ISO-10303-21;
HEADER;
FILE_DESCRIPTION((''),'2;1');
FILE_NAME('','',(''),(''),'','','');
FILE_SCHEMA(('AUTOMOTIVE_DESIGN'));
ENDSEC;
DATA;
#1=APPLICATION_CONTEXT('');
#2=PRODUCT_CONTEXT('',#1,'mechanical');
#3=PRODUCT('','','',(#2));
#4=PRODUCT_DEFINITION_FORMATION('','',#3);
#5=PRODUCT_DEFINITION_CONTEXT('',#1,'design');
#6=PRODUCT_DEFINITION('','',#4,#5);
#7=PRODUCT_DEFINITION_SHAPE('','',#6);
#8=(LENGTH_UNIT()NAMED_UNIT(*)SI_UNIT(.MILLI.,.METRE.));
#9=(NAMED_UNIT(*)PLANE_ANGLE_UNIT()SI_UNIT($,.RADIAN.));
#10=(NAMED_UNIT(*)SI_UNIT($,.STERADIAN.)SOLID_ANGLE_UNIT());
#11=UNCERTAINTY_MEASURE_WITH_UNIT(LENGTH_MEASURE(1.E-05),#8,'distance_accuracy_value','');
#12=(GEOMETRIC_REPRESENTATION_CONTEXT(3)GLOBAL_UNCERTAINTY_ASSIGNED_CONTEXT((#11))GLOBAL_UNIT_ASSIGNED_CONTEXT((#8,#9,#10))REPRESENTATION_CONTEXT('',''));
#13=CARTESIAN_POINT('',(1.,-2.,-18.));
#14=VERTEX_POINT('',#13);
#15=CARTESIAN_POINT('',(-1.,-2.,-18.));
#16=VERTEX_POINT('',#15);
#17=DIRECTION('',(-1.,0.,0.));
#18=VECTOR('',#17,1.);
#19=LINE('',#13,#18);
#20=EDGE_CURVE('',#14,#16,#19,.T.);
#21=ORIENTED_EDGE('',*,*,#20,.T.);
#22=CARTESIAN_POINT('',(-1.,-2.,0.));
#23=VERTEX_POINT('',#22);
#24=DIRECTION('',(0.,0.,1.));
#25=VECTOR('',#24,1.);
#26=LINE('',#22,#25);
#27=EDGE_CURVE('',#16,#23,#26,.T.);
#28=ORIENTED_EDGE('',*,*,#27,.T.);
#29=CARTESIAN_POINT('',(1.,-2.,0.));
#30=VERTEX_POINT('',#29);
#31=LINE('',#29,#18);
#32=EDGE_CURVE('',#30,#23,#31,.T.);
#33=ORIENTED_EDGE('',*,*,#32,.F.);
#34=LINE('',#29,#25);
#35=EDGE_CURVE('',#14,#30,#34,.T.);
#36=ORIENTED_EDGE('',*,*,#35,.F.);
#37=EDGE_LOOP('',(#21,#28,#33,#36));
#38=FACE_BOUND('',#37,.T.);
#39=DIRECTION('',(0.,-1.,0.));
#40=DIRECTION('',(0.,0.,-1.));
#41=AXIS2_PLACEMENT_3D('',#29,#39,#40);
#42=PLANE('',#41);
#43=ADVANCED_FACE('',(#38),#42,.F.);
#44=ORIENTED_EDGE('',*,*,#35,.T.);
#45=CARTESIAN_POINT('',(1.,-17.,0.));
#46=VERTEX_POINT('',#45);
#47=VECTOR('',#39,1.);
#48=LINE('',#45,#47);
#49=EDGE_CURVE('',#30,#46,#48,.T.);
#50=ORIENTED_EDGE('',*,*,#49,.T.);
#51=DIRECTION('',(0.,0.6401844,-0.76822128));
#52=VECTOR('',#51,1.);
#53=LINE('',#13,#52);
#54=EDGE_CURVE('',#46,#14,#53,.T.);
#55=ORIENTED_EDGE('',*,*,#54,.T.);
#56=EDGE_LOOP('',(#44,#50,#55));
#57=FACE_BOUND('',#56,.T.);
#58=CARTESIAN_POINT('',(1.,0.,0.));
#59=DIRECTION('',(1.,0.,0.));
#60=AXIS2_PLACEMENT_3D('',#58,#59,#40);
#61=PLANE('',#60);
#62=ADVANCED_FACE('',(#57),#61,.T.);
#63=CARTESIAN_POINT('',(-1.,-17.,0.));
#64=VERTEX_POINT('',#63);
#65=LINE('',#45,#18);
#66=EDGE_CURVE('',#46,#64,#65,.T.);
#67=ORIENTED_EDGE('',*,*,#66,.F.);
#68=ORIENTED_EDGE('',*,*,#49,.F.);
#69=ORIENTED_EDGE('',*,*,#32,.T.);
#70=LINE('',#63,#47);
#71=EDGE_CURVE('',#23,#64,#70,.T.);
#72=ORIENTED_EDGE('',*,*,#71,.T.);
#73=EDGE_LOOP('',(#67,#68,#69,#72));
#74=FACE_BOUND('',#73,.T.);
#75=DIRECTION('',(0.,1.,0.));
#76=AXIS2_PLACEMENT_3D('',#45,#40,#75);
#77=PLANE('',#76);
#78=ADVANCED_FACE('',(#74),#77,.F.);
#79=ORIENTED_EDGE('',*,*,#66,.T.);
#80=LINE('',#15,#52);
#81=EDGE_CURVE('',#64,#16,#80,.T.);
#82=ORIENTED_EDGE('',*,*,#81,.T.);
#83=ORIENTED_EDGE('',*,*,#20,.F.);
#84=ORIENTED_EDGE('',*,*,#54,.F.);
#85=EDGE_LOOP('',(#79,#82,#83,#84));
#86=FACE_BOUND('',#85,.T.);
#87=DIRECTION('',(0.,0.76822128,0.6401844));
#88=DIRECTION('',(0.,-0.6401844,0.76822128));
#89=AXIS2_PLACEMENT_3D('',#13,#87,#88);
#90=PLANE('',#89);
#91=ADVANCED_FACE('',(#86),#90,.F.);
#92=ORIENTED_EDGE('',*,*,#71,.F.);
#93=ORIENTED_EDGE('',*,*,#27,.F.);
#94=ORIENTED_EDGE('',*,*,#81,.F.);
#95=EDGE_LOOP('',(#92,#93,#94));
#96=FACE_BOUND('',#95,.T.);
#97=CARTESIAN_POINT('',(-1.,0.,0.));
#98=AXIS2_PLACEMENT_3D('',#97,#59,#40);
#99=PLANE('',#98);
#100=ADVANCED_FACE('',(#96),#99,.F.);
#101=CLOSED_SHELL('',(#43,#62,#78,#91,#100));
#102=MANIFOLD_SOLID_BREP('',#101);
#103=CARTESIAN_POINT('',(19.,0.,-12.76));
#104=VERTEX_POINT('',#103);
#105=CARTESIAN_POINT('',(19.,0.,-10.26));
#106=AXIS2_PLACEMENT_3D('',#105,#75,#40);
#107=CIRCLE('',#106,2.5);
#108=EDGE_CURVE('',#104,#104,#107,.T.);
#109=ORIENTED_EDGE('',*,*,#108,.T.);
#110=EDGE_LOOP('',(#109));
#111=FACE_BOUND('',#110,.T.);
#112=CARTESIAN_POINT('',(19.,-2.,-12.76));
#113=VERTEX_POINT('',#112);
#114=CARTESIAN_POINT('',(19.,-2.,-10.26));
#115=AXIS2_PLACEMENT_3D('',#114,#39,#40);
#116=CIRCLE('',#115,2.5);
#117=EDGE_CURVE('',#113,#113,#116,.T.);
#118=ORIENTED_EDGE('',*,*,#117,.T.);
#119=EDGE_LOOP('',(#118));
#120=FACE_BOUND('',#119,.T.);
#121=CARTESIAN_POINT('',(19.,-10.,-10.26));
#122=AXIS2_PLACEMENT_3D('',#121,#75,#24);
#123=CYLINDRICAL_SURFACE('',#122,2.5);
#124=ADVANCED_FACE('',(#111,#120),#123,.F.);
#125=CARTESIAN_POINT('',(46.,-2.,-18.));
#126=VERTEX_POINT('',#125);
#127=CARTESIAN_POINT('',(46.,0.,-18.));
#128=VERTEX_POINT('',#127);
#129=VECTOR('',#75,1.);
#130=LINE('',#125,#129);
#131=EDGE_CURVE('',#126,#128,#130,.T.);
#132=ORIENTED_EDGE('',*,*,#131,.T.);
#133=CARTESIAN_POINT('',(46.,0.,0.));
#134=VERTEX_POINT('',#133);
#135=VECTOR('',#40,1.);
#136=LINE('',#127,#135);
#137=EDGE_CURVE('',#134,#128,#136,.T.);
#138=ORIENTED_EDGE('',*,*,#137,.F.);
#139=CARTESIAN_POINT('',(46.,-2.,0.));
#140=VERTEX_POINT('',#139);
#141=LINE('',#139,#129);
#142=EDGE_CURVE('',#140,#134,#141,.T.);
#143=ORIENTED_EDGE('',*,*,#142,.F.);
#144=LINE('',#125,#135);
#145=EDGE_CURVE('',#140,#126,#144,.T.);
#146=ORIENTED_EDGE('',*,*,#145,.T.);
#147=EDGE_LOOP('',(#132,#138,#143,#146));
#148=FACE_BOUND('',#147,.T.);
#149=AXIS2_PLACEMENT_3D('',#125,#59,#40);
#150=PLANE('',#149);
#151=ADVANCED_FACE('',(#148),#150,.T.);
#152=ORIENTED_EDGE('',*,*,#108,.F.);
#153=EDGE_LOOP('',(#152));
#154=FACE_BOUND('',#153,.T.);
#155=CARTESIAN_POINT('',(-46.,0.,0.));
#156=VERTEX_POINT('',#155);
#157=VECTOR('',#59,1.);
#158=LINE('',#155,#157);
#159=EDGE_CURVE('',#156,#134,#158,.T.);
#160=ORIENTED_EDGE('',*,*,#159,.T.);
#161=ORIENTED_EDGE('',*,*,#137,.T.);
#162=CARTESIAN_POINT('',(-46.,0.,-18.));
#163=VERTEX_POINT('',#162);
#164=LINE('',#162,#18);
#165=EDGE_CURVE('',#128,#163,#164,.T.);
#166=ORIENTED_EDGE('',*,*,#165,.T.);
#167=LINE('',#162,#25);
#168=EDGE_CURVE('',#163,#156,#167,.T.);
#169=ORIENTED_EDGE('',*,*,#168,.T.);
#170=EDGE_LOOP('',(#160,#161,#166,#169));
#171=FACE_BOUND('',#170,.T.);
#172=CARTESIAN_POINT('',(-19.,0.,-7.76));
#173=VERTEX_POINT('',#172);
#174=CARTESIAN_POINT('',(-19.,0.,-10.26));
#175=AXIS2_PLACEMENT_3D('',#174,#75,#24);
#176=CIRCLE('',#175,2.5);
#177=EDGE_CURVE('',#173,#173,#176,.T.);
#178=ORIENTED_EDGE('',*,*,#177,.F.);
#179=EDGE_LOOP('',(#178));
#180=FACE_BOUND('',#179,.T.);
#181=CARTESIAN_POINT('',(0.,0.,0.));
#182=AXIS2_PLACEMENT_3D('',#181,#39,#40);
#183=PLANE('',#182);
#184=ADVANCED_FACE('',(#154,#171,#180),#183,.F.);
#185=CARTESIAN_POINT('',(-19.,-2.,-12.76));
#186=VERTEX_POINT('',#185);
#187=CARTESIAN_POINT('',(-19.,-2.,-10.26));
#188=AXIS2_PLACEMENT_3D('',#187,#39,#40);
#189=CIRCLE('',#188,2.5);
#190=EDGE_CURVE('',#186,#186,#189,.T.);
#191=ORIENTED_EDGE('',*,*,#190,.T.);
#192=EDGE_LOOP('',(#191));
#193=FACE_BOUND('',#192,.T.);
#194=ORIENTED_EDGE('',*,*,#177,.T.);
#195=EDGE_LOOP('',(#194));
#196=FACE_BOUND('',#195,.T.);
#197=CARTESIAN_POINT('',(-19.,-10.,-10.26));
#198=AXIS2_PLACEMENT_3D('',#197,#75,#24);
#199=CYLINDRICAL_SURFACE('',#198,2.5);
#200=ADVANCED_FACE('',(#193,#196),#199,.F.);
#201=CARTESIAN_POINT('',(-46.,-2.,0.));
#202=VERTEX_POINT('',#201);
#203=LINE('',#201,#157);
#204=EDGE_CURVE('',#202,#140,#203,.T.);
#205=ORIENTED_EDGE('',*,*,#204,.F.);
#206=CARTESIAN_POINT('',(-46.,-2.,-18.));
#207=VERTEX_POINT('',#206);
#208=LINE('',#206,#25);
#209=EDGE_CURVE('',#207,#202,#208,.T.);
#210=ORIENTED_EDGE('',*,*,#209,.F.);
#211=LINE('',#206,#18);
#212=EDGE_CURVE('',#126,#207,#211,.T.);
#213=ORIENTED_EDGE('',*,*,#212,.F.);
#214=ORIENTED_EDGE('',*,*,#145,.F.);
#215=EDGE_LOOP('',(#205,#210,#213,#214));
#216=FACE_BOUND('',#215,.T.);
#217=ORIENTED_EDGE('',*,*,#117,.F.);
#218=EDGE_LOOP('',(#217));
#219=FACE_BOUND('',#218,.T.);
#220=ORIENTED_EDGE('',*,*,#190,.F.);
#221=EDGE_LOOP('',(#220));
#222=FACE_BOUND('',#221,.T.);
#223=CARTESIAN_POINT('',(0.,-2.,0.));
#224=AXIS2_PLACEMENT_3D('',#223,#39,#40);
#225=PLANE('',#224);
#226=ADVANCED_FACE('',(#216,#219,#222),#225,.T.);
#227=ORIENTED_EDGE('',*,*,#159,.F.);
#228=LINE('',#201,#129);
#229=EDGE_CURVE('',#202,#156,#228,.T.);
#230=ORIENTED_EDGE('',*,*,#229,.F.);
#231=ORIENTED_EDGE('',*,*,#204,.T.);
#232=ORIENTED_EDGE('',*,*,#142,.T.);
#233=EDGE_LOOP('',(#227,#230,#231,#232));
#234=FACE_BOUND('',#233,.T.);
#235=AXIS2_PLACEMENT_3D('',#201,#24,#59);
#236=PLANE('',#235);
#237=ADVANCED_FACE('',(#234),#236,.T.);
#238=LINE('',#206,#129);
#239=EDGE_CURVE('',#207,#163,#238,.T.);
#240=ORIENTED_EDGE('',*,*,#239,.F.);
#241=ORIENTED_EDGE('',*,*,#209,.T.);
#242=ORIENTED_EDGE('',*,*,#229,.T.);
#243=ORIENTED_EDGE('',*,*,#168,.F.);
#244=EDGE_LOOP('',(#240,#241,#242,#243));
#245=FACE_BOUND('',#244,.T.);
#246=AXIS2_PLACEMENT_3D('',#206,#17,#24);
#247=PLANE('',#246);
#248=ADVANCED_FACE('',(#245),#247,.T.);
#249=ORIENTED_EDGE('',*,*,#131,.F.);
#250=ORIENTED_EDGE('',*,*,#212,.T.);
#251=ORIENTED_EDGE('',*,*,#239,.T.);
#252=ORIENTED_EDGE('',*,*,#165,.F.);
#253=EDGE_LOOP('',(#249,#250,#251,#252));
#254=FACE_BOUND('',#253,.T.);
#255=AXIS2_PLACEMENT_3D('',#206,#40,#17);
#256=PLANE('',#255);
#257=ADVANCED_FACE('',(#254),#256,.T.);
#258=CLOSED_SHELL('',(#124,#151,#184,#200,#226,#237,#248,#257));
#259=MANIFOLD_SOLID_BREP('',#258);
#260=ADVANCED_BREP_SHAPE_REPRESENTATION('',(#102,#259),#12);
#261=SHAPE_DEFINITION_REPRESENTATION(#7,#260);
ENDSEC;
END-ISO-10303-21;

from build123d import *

# Parameters (mm, degrees)
SKETCH1_W           = 92
SKETCH1_H           = 18
BASE_FLANGE1_DEPTH  = 2
SKETCH11_R          = 2.5
CUT_EXTRUDE1_DEPTH  = 10
BOSS_EXTRUDE1_DEPTH = 1


# Sheet-metal steps are written as plain solids
with BuildPart() as part:
    # Sketch1 → Base-Flange1 (new body)
    with BuildSketch(Plane(origin=(0, 0, 0), x_dir=(1, 0, 0), z_dir=(0, 1, 0))):
        with Locations((0, 9)):
            Rectangle(SKETCH1_W, SKETCH1_H)
    extrude(amount=-BASE_FLANGE1_DEPTH)

    # Sketch11 → Cut-Extrude1 (cut)
    with BuildSketch(Plane(origin=(0, 0, 0), x_dir=(1, 0, 0), z_dir=(0, 1, 0))):
        with Locations(Location((-19, 10.26, 0), (0, 0, 270))):
            Circle(SKETCH11_R)
        with Locations(Location((19, 10.26, 0), (0, 0, 90))):
            Circle(SKETCH11_R)
    extrude(amount=-CUT_EXTRUDE1_DEPTH, mode=Mode.SUBTRACT)


with BuildPart() as body_2:
    # Sketch12 → Boss-Extrude1 (new, symmetric)
    with BuildSketch(Plane(origin=(0, 0, 0), x_dir=(0, 0, -1), z_dir=(1, 0, 0))):
        Polygon((18, -2), (0, -17), (0, -2), align=None)
    extrude(amount=BOSS_EXTRUDE1_DEPTH, both=True)


solid = Compound([part.part, body_2.part])
